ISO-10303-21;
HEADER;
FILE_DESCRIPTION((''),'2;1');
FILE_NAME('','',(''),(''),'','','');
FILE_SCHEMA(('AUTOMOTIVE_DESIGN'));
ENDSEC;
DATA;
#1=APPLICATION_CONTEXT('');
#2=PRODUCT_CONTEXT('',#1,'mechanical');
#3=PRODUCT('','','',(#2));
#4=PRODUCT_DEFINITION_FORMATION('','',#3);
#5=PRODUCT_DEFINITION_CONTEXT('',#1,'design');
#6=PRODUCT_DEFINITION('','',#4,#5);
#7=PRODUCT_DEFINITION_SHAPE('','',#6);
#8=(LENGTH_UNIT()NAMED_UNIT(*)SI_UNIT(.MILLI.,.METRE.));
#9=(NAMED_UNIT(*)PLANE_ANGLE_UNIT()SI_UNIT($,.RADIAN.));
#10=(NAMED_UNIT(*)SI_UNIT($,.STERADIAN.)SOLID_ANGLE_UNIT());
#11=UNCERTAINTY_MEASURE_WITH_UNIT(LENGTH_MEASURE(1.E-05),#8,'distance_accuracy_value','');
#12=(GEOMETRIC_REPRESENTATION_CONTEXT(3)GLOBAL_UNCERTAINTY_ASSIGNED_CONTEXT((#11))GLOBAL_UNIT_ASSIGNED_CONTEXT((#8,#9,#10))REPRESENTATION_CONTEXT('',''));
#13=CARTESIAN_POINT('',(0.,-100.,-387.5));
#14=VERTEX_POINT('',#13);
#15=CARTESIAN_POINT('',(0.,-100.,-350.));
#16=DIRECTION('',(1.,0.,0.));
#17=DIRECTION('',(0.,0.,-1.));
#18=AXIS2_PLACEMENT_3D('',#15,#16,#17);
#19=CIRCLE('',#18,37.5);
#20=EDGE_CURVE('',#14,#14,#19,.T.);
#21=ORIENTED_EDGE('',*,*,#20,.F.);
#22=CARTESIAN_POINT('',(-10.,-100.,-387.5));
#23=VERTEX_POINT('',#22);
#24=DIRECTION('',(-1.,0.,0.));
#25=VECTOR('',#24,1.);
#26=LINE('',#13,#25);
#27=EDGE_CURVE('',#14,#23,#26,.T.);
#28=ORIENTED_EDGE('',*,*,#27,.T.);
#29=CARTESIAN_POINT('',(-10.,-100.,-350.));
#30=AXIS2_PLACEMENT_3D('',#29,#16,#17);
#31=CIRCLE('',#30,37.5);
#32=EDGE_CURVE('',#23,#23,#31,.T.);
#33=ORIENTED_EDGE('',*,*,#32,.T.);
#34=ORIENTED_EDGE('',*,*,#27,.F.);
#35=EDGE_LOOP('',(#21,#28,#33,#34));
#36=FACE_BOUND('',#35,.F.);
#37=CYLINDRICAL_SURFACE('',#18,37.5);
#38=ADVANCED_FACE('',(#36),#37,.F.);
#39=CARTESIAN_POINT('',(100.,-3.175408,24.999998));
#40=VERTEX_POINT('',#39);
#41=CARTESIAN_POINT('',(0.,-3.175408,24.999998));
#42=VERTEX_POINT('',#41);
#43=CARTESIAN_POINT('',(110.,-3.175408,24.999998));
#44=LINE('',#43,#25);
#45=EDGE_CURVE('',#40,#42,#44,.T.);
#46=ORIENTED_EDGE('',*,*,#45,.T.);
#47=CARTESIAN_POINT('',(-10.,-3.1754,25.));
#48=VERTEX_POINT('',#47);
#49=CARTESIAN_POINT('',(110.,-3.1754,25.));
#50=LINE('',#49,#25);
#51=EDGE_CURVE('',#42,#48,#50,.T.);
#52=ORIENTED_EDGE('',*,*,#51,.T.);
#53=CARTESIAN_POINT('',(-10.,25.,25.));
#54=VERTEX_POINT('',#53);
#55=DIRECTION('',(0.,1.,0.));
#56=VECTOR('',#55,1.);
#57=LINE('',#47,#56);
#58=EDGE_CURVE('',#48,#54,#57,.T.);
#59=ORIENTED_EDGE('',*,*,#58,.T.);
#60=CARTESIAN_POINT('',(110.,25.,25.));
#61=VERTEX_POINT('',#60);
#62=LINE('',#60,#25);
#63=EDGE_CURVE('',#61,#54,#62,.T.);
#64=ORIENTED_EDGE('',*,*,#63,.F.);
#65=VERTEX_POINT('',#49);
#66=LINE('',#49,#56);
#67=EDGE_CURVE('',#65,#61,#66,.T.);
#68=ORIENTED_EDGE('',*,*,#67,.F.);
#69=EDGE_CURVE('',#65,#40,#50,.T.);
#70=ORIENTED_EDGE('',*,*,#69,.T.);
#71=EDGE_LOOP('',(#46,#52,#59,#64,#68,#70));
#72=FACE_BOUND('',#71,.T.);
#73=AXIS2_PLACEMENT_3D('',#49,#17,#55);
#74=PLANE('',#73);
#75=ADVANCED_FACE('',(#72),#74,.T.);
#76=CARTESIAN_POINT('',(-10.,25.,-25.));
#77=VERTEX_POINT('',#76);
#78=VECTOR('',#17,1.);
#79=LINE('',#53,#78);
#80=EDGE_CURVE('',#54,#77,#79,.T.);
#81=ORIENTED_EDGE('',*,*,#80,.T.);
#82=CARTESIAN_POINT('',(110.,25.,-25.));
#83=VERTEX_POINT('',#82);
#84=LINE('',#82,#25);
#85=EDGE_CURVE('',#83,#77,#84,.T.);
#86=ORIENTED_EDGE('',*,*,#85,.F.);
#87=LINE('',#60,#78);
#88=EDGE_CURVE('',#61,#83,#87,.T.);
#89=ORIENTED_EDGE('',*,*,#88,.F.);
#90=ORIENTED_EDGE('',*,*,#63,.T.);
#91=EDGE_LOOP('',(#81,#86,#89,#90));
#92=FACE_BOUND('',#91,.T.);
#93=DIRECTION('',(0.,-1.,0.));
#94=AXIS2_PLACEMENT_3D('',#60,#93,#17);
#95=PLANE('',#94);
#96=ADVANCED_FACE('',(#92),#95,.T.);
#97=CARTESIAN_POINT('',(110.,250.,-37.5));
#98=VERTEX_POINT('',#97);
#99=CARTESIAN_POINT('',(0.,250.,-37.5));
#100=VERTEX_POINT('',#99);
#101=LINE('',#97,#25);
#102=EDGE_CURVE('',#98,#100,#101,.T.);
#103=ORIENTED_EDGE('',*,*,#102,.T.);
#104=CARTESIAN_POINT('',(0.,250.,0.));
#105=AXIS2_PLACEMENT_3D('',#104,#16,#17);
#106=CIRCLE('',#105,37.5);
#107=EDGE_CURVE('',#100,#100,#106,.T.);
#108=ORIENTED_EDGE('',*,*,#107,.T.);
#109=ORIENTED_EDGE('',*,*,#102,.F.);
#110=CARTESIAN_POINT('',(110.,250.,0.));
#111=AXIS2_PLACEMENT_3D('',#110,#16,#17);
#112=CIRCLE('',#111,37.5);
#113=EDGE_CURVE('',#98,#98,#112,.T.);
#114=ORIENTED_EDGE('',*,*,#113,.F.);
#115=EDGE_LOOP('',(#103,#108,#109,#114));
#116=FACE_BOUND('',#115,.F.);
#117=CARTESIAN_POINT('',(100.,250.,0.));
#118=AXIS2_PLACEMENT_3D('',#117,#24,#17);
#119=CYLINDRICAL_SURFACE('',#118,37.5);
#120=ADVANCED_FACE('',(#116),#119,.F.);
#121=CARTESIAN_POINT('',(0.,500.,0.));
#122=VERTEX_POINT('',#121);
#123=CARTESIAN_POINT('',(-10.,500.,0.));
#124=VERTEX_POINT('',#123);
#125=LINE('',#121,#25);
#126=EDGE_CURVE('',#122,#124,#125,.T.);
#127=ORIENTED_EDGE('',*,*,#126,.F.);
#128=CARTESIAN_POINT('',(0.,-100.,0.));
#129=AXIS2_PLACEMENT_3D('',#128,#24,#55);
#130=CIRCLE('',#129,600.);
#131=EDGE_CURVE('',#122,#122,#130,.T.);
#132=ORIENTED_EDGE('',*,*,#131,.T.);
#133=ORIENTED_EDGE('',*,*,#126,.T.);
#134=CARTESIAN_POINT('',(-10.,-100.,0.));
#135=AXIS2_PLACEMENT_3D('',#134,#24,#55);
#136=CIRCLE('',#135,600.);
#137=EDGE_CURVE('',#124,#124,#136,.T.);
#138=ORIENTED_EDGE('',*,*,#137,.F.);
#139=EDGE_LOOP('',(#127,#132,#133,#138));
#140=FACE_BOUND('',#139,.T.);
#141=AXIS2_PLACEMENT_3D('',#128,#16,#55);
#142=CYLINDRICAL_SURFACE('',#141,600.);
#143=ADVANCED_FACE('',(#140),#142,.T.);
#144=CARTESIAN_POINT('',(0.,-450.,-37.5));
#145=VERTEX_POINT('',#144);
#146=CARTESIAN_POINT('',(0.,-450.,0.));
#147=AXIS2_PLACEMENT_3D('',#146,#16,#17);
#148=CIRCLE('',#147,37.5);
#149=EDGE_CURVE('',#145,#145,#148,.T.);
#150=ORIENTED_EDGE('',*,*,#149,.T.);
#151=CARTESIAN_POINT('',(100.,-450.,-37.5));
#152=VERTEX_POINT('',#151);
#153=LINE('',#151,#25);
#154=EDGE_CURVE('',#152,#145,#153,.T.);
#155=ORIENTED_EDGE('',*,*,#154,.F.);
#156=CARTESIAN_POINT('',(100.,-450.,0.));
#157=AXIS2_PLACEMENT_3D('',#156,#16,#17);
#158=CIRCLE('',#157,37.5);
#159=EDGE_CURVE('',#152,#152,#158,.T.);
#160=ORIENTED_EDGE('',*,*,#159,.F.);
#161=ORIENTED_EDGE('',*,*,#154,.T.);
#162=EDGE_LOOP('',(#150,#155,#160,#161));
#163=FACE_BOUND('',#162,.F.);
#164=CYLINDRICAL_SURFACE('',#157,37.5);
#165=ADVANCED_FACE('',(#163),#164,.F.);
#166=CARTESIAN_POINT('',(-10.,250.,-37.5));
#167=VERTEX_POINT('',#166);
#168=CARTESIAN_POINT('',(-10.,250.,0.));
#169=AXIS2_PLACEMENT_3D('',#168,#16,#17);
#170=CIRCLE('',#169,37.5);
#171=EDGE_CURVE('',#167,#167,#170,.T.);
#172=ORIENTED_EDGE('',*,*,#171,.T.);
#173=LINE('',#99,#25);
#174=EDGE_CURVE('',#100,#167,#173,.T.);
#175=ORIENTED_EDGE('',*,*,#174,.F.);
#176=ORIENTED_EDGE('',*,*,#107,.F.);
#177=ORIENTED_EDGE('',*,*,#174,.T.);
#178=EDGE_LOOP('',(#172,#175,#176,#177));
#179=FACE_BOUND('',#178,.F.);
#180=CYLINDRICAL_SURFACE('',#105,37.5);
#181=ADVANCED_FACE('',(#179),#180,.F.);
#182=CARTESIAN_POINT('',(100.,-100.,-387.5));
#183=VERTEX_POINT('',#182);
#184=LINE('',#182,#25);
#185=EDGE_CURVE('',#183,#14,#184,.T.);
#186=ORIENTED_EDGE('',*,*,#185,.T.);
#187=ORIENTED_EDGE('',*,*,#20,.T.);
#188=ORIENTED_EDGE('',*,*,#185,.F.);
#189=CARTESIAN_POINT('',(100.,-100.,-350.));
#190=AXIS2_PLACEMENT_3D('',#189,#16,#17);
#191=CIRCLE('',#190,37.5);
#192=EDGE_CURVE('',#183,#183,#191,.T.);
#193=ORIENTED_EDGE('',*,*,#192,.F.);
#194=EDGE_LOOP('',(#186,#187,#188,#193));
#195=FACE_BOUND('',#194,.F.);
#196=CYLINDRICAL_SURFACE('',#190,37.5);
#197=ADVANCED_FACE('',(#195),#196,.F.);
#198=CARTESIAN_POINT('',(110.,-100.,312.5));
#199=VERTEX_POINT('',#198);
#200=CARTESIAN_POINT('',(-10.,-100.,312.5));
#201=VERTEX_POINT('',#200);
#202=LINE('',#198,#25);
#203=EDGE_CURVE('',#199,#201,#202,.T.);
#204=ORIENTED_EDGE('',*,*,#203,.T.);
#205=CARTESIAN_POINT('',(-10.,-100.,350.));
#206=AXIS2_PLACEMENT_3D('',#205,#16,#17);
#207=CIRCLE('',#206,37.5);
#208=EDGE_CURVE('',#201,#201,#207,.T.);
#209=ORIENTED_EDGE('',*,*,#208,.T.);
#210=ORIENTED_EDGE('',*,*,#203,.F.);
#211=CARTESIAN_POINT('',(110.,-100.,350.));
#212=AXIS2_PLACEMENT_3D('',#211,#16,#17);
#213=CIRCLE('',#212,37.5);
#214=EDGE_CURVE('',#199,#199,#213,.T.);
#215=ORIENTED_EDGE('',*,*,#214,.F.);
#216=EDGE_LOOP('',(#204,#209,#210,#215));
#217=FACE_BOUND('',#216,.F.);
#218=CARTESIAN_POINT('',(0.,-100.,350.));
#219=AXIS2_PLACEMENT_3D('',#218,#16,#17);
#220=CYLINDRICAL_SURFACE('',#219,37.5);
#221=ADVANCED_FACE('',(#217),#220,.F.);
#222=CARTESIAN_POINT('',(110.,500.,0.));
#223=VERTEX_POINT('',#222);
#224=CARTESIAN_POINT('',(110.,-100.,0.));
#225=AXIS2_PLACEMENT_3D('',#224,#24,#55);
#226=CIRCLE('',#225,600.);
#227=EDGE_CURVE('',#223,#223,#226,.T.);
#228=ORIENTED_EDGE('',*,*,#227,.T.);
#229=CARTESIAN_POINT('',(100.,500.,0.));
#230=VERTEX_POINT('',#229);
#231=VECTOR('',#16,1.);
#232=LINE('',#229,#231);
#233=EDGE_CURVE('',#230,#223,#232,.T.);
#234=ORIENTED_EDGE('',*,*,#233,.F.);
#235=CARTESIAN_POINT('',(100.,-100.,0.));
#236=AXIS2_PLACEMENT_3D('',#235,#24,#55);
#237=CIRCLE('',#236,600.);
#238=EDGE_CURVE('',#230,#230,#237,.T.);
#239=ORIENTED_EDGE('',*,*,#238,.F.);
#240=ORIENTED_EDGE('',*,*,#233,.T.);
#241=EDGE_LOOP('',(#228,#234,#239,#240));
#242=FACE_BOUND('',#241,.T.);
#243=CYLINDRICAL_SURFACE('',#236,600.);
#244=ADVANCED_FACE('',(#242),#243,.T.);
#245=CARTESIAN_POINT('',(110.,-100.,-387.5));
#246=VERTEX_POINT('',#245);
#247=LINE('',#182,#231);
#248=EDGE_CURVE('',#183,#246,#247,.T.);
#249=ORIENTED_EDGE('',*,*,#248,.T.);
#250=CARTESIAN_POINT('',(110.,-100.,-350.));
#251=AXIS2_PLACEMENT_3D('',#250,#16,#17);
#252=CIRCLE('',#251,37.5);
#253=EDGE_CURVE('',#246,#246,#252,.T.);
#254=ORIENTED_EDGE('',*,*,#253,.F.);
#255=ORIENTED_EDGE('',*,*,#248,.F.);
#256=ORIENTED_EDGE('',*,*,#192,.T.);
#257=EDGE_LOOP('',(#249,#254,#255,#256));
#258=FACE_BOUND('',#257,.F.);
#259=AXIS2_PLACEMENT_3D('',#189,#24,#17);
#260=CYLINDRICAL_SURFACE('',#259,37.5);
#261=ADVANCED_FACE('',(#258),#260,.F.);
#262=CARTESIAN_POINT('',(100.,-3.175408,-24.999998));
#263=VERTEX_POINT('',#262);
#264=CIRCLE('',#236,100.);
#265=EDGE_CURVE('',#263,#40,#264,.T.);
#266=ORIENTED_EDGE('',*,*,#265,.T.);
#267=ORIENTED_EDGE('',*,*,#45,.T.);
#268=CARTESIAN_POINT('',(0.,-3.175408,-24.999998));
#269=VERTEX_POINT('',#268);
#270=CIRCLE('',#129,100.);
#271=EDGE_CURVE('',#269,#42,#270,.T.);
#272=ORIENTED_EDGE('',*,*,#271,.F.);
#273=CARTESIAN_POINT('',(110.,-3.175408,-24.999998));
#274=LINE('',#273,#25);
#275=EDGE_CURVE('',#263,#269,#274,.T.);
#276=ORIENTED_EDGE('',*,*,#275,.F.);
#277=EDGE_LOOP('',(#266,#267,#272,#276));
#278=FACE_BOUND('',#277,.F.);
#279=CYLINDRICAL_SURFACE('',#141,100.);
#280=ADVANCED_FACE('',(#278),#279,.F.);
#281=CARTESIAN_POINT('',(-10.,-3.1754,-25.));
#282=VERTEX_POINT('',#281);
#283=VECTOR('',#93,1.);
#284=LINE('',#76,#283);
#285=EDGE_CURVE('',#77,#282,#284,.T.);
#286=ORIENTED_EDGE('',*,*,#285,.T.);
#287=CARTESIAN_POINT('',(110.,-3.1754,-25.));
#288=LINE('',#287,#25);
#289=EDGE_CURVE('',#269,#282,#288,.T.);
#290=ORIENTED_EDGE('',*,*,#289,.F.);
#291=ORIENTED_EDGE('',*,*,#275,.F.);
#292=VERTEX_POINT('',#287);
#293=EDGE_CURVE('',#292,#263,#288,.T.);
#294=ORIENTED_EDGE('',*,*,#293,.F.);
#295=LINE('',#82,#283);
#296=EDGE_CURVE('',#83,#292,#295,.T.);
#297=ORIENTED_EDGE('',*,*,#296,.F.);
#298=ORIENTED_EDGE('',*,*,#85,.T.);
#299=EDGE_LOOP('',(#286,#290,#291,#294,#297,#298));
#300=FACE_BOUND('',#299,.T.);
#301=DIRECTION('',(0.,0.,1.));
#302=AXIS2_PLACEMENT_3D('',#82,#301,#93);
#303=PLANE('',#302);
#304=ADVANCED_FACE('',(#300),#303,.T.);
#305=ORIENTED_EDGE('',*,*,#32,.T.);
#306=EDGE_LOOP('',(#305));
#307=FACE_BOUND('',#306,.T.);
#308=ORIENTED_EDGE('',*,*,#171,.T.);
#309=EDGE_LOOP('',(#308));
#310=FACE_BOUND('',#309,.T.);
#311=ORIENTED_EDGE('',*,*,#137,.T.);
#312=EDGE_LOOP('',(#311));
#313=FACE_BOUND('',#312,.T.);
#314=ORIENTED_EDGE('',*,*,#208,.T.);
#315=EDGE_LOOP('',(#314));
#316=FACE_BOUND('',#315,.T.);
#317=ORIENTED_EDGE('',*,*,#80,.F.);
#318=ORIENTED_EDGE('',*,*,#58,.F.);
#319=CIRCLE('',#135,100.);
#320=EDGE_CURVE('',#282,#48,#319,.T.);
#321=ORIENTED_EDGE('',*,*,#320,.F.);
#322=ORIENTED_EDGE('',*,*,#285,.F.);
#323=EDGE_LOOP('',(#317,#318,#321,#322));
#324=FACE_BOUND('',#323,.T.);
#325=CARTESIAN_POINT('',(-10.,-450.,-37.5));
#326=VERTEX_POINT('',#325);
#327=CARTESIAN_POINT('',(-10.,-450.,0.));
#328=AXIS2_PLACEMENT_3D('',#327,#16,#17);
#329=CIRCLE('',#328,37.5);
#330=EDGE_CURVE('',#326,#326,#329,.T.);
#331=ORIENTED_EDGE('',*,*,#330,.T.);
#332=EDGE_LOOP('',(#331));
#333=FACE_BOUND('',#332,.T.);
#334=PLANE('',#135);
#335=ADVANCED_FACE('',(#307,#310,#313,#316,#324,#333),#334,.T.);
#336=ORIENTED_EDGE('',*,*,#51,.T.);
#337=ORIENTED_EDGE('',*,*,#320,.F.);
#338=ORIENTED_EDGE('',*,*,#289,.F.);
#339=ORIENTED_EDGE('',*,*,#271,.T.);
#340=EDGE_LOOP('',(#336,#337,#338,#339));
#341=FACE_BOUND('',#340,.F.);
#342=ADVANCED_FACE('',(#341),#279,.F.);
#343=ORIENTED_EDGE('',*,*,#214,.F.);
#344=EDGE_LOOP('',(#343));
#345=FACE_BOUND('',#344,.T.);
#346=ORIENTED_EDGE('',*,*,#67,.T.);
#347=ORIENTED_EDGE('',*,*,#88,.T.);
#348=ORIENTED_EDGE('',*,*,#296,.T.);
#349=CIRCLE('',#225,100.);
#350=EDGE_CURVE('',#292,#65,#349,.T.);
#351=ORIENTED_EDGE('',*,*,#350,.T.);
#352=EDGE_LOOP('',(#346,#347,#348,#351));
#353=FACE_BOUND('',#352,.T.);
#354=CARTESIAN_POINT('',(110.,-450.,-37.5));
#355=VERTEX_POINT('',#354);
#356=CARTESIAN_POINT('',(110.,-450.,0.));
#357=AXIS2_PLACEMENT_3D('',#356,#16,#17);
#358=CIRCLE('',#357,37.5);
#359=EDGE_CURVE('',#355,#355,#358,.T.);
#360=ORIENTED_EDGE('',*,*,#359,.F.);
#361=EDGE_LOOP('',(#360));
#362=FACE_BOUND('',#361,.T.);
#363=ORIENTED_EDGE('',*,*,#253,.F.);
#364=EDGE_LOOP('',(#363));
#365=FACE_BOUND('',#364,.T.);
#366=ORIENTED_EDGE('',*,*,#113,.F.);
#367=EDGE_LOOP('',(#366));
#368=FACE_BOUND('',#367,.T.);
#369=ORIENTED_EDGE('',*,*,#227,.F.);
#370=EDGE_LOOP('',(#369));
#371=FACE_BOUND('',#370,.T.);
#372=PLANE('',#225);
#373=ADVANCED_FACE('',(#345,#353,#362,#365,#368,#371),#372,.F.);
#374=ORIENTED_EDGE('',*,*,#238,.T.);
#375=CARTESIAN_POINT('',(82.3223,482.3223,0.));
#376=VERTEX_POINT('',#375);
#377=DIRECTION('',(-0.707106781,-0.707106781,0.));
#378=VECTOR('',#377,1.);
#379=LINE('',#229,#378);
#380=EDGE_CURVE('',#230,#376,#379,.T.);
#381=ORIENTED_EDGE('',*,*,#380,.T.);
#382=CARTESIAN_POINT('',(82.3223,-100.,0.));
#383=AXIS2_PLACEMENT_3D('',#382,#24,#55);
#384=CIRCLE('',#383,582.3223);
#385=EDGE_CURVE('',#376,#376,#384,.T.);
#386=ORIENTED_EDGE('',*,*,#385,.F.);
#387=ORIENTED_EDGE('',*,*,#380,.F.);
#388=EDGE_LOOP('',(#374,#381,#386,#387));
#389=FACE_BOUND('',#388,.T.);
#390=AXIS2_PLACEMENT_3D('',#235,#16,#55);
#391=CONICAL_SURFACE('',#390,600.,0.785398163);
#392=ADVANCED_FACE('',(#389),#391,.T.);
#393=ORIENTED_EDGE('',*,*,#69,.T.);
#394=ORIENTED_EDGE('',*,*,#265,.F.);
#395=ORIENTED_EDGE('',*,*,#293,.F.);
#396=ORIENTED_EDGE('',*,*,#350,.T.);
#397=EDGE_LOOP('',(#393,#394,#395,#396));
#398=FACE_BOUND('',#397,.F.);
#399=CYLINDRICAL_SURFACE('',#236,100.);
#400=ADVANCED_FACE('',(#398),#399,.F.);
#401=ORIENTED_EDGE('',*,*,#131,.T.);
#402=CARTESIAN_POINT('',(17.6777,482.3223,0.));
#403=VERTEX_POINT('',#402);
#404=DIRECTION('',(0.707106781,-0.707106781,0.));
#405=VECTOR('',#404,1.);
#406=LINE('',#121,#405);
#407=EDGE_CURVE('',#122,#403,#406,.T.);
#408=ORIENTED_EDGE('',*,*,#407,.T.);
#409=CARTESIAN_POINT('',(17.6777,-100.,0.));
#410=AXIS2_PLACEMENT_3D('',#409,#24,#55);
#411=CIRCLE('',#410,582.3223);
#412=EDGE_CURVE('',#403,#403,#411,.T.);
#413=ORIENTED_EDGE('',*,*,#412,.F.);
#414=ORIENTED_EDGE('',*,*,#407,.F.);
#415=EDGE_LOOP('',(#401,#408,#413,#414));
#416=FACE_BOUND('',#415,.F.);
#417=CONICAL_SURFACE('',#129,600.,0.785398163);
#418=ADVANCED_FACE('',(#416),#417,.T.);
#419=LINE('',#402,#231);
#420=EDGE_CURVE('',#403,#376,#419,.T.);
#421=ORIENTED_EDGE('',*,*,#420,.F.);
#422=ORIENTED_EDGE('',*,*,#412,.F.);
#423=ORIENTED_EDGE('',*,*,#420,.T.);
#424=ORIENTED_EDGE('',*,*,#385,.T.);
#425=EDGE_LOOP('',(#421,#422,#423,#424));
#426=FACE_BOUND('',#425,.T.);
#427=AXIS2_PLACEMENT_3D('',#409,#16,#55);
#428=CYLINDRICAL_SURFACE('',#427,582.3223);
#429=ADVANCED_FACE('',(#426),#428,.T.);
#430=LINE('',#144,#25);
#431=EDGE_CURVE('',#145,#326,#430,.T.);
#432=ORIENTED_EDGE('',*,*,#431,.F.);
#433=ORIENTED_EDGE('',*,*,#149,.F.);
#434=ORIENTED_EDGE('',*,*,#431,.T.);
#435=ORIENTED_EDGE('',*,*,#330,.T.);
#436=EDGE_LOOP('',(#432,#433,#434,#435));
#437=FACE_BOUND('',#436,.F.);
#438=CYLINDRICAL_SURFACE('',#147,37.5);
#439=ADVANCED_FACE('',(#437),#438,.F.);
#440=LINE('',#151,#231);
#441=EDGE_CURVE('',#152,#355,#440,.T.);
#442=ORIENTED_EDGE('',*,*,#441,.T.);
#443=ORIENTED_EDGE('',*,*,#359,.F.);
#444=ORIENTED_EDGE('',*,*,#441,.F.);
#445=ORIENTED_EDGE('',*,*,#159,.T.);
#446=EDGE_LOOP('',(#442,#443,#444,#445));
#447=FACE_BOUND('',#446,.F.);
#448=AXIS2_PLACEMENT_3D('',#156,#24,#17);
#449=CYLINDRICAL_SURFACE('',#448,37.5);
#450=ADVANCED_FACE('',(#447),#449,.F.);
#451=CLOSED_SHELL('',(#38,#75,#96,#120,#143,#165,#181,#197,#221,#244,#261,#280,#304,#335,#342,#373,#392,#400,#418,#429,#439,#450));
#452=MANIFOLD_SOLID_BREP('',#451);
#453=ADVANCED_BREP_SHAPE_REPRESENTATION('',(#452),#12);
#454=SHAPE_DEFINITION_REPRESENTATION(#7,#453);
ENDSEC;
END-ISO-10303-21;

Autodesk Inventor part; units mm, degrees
ref_plane "YZ Plane" through (0, 0, 0) normal (1, 0, 0) x (0, 1, 0)
ref_plane "XZ Plane" through (0, 0, 0) normal (0, 1, 0) x (-1, 0, 0)
ref_plane "XY Plane" through (0, 0, 0) normal (0, 0, 1) x (1, 0, 0)
sketch "Sketch1" plane through (0, 0, 0) normal (0, 0, 1) x (1, 0, 0)
  line L0 (0, 0) -> (100, 0)
  line L1 (100, 0) -> (100, 500)
  line L2 (0, 500) -> (0, 0)
  line L3 (0, 500) -> (17.6777, 482.3223)
  line L4 (100, 500) -> (82.3223, 482.3223)
  line L5 (17.6777, 482.3223) -> (82.3223, 482.3223)
  line L6 (50, -100) -> (-150, -100)
revolve "Revolution1" add sketch "Sketch1" angle 360 about axis through (50, -100, 0) along (-1, 0, 0)
sketch "Sketch2" plane through (100, -100, 0) normal (1, 0, 0) x (0, 0, -1)
  circle A0 centre (0, 0) radius 600 projected
  circle A1 centre (0, 350) radius 37.5
  circle A2 centre (0, 0) radius 100 projected
  circle A3 centre (-350, 0) radius 37.5
  circle A4 centre (0, -350) radius 37.5
  circle A5 centre (350, 0) radius 37.5
  point P0 (0, 100)
  dimension "d8" = 360
extrude "Extrusion1" cut sketch "Sketch2" against normal blind 100 contours A1 | A3 | A4 | A5
thicken "Thicken1" operation add thickness 10 both sides no extend neighbours no toward (1, 0, 0) faces at (100, -364.9419, 262.9039)
thicken "Thicken2" operation add thickness 10 both sides no extend neighbours no toward (-1, 0, 0) faces at (0, -364.9419, 262.9039)
sketch "Sketch3" plane through (110, -100, 0) normal (1, 0, 0) x (0, 0, -1)
  line L0 (-25, 125) -> (25, 125)
  line L1 (25, 125) -> (25, 96.8246)
  line L2 (-25, 96.8246) -> (-25, 125)
  line L3 (-25, 125) -> (0, 100) construction
  line L4 (25, 125) -> (0, 100) construction
  arc A0 (25, 96.8246) -> (-25, 96.8246) centre (0, 0) ccw
  point P0 (0, 100)
extrude "Extrusion2" cut sketch "Sketch3" against normal blind 120
properties part number "Polea-1021920"
